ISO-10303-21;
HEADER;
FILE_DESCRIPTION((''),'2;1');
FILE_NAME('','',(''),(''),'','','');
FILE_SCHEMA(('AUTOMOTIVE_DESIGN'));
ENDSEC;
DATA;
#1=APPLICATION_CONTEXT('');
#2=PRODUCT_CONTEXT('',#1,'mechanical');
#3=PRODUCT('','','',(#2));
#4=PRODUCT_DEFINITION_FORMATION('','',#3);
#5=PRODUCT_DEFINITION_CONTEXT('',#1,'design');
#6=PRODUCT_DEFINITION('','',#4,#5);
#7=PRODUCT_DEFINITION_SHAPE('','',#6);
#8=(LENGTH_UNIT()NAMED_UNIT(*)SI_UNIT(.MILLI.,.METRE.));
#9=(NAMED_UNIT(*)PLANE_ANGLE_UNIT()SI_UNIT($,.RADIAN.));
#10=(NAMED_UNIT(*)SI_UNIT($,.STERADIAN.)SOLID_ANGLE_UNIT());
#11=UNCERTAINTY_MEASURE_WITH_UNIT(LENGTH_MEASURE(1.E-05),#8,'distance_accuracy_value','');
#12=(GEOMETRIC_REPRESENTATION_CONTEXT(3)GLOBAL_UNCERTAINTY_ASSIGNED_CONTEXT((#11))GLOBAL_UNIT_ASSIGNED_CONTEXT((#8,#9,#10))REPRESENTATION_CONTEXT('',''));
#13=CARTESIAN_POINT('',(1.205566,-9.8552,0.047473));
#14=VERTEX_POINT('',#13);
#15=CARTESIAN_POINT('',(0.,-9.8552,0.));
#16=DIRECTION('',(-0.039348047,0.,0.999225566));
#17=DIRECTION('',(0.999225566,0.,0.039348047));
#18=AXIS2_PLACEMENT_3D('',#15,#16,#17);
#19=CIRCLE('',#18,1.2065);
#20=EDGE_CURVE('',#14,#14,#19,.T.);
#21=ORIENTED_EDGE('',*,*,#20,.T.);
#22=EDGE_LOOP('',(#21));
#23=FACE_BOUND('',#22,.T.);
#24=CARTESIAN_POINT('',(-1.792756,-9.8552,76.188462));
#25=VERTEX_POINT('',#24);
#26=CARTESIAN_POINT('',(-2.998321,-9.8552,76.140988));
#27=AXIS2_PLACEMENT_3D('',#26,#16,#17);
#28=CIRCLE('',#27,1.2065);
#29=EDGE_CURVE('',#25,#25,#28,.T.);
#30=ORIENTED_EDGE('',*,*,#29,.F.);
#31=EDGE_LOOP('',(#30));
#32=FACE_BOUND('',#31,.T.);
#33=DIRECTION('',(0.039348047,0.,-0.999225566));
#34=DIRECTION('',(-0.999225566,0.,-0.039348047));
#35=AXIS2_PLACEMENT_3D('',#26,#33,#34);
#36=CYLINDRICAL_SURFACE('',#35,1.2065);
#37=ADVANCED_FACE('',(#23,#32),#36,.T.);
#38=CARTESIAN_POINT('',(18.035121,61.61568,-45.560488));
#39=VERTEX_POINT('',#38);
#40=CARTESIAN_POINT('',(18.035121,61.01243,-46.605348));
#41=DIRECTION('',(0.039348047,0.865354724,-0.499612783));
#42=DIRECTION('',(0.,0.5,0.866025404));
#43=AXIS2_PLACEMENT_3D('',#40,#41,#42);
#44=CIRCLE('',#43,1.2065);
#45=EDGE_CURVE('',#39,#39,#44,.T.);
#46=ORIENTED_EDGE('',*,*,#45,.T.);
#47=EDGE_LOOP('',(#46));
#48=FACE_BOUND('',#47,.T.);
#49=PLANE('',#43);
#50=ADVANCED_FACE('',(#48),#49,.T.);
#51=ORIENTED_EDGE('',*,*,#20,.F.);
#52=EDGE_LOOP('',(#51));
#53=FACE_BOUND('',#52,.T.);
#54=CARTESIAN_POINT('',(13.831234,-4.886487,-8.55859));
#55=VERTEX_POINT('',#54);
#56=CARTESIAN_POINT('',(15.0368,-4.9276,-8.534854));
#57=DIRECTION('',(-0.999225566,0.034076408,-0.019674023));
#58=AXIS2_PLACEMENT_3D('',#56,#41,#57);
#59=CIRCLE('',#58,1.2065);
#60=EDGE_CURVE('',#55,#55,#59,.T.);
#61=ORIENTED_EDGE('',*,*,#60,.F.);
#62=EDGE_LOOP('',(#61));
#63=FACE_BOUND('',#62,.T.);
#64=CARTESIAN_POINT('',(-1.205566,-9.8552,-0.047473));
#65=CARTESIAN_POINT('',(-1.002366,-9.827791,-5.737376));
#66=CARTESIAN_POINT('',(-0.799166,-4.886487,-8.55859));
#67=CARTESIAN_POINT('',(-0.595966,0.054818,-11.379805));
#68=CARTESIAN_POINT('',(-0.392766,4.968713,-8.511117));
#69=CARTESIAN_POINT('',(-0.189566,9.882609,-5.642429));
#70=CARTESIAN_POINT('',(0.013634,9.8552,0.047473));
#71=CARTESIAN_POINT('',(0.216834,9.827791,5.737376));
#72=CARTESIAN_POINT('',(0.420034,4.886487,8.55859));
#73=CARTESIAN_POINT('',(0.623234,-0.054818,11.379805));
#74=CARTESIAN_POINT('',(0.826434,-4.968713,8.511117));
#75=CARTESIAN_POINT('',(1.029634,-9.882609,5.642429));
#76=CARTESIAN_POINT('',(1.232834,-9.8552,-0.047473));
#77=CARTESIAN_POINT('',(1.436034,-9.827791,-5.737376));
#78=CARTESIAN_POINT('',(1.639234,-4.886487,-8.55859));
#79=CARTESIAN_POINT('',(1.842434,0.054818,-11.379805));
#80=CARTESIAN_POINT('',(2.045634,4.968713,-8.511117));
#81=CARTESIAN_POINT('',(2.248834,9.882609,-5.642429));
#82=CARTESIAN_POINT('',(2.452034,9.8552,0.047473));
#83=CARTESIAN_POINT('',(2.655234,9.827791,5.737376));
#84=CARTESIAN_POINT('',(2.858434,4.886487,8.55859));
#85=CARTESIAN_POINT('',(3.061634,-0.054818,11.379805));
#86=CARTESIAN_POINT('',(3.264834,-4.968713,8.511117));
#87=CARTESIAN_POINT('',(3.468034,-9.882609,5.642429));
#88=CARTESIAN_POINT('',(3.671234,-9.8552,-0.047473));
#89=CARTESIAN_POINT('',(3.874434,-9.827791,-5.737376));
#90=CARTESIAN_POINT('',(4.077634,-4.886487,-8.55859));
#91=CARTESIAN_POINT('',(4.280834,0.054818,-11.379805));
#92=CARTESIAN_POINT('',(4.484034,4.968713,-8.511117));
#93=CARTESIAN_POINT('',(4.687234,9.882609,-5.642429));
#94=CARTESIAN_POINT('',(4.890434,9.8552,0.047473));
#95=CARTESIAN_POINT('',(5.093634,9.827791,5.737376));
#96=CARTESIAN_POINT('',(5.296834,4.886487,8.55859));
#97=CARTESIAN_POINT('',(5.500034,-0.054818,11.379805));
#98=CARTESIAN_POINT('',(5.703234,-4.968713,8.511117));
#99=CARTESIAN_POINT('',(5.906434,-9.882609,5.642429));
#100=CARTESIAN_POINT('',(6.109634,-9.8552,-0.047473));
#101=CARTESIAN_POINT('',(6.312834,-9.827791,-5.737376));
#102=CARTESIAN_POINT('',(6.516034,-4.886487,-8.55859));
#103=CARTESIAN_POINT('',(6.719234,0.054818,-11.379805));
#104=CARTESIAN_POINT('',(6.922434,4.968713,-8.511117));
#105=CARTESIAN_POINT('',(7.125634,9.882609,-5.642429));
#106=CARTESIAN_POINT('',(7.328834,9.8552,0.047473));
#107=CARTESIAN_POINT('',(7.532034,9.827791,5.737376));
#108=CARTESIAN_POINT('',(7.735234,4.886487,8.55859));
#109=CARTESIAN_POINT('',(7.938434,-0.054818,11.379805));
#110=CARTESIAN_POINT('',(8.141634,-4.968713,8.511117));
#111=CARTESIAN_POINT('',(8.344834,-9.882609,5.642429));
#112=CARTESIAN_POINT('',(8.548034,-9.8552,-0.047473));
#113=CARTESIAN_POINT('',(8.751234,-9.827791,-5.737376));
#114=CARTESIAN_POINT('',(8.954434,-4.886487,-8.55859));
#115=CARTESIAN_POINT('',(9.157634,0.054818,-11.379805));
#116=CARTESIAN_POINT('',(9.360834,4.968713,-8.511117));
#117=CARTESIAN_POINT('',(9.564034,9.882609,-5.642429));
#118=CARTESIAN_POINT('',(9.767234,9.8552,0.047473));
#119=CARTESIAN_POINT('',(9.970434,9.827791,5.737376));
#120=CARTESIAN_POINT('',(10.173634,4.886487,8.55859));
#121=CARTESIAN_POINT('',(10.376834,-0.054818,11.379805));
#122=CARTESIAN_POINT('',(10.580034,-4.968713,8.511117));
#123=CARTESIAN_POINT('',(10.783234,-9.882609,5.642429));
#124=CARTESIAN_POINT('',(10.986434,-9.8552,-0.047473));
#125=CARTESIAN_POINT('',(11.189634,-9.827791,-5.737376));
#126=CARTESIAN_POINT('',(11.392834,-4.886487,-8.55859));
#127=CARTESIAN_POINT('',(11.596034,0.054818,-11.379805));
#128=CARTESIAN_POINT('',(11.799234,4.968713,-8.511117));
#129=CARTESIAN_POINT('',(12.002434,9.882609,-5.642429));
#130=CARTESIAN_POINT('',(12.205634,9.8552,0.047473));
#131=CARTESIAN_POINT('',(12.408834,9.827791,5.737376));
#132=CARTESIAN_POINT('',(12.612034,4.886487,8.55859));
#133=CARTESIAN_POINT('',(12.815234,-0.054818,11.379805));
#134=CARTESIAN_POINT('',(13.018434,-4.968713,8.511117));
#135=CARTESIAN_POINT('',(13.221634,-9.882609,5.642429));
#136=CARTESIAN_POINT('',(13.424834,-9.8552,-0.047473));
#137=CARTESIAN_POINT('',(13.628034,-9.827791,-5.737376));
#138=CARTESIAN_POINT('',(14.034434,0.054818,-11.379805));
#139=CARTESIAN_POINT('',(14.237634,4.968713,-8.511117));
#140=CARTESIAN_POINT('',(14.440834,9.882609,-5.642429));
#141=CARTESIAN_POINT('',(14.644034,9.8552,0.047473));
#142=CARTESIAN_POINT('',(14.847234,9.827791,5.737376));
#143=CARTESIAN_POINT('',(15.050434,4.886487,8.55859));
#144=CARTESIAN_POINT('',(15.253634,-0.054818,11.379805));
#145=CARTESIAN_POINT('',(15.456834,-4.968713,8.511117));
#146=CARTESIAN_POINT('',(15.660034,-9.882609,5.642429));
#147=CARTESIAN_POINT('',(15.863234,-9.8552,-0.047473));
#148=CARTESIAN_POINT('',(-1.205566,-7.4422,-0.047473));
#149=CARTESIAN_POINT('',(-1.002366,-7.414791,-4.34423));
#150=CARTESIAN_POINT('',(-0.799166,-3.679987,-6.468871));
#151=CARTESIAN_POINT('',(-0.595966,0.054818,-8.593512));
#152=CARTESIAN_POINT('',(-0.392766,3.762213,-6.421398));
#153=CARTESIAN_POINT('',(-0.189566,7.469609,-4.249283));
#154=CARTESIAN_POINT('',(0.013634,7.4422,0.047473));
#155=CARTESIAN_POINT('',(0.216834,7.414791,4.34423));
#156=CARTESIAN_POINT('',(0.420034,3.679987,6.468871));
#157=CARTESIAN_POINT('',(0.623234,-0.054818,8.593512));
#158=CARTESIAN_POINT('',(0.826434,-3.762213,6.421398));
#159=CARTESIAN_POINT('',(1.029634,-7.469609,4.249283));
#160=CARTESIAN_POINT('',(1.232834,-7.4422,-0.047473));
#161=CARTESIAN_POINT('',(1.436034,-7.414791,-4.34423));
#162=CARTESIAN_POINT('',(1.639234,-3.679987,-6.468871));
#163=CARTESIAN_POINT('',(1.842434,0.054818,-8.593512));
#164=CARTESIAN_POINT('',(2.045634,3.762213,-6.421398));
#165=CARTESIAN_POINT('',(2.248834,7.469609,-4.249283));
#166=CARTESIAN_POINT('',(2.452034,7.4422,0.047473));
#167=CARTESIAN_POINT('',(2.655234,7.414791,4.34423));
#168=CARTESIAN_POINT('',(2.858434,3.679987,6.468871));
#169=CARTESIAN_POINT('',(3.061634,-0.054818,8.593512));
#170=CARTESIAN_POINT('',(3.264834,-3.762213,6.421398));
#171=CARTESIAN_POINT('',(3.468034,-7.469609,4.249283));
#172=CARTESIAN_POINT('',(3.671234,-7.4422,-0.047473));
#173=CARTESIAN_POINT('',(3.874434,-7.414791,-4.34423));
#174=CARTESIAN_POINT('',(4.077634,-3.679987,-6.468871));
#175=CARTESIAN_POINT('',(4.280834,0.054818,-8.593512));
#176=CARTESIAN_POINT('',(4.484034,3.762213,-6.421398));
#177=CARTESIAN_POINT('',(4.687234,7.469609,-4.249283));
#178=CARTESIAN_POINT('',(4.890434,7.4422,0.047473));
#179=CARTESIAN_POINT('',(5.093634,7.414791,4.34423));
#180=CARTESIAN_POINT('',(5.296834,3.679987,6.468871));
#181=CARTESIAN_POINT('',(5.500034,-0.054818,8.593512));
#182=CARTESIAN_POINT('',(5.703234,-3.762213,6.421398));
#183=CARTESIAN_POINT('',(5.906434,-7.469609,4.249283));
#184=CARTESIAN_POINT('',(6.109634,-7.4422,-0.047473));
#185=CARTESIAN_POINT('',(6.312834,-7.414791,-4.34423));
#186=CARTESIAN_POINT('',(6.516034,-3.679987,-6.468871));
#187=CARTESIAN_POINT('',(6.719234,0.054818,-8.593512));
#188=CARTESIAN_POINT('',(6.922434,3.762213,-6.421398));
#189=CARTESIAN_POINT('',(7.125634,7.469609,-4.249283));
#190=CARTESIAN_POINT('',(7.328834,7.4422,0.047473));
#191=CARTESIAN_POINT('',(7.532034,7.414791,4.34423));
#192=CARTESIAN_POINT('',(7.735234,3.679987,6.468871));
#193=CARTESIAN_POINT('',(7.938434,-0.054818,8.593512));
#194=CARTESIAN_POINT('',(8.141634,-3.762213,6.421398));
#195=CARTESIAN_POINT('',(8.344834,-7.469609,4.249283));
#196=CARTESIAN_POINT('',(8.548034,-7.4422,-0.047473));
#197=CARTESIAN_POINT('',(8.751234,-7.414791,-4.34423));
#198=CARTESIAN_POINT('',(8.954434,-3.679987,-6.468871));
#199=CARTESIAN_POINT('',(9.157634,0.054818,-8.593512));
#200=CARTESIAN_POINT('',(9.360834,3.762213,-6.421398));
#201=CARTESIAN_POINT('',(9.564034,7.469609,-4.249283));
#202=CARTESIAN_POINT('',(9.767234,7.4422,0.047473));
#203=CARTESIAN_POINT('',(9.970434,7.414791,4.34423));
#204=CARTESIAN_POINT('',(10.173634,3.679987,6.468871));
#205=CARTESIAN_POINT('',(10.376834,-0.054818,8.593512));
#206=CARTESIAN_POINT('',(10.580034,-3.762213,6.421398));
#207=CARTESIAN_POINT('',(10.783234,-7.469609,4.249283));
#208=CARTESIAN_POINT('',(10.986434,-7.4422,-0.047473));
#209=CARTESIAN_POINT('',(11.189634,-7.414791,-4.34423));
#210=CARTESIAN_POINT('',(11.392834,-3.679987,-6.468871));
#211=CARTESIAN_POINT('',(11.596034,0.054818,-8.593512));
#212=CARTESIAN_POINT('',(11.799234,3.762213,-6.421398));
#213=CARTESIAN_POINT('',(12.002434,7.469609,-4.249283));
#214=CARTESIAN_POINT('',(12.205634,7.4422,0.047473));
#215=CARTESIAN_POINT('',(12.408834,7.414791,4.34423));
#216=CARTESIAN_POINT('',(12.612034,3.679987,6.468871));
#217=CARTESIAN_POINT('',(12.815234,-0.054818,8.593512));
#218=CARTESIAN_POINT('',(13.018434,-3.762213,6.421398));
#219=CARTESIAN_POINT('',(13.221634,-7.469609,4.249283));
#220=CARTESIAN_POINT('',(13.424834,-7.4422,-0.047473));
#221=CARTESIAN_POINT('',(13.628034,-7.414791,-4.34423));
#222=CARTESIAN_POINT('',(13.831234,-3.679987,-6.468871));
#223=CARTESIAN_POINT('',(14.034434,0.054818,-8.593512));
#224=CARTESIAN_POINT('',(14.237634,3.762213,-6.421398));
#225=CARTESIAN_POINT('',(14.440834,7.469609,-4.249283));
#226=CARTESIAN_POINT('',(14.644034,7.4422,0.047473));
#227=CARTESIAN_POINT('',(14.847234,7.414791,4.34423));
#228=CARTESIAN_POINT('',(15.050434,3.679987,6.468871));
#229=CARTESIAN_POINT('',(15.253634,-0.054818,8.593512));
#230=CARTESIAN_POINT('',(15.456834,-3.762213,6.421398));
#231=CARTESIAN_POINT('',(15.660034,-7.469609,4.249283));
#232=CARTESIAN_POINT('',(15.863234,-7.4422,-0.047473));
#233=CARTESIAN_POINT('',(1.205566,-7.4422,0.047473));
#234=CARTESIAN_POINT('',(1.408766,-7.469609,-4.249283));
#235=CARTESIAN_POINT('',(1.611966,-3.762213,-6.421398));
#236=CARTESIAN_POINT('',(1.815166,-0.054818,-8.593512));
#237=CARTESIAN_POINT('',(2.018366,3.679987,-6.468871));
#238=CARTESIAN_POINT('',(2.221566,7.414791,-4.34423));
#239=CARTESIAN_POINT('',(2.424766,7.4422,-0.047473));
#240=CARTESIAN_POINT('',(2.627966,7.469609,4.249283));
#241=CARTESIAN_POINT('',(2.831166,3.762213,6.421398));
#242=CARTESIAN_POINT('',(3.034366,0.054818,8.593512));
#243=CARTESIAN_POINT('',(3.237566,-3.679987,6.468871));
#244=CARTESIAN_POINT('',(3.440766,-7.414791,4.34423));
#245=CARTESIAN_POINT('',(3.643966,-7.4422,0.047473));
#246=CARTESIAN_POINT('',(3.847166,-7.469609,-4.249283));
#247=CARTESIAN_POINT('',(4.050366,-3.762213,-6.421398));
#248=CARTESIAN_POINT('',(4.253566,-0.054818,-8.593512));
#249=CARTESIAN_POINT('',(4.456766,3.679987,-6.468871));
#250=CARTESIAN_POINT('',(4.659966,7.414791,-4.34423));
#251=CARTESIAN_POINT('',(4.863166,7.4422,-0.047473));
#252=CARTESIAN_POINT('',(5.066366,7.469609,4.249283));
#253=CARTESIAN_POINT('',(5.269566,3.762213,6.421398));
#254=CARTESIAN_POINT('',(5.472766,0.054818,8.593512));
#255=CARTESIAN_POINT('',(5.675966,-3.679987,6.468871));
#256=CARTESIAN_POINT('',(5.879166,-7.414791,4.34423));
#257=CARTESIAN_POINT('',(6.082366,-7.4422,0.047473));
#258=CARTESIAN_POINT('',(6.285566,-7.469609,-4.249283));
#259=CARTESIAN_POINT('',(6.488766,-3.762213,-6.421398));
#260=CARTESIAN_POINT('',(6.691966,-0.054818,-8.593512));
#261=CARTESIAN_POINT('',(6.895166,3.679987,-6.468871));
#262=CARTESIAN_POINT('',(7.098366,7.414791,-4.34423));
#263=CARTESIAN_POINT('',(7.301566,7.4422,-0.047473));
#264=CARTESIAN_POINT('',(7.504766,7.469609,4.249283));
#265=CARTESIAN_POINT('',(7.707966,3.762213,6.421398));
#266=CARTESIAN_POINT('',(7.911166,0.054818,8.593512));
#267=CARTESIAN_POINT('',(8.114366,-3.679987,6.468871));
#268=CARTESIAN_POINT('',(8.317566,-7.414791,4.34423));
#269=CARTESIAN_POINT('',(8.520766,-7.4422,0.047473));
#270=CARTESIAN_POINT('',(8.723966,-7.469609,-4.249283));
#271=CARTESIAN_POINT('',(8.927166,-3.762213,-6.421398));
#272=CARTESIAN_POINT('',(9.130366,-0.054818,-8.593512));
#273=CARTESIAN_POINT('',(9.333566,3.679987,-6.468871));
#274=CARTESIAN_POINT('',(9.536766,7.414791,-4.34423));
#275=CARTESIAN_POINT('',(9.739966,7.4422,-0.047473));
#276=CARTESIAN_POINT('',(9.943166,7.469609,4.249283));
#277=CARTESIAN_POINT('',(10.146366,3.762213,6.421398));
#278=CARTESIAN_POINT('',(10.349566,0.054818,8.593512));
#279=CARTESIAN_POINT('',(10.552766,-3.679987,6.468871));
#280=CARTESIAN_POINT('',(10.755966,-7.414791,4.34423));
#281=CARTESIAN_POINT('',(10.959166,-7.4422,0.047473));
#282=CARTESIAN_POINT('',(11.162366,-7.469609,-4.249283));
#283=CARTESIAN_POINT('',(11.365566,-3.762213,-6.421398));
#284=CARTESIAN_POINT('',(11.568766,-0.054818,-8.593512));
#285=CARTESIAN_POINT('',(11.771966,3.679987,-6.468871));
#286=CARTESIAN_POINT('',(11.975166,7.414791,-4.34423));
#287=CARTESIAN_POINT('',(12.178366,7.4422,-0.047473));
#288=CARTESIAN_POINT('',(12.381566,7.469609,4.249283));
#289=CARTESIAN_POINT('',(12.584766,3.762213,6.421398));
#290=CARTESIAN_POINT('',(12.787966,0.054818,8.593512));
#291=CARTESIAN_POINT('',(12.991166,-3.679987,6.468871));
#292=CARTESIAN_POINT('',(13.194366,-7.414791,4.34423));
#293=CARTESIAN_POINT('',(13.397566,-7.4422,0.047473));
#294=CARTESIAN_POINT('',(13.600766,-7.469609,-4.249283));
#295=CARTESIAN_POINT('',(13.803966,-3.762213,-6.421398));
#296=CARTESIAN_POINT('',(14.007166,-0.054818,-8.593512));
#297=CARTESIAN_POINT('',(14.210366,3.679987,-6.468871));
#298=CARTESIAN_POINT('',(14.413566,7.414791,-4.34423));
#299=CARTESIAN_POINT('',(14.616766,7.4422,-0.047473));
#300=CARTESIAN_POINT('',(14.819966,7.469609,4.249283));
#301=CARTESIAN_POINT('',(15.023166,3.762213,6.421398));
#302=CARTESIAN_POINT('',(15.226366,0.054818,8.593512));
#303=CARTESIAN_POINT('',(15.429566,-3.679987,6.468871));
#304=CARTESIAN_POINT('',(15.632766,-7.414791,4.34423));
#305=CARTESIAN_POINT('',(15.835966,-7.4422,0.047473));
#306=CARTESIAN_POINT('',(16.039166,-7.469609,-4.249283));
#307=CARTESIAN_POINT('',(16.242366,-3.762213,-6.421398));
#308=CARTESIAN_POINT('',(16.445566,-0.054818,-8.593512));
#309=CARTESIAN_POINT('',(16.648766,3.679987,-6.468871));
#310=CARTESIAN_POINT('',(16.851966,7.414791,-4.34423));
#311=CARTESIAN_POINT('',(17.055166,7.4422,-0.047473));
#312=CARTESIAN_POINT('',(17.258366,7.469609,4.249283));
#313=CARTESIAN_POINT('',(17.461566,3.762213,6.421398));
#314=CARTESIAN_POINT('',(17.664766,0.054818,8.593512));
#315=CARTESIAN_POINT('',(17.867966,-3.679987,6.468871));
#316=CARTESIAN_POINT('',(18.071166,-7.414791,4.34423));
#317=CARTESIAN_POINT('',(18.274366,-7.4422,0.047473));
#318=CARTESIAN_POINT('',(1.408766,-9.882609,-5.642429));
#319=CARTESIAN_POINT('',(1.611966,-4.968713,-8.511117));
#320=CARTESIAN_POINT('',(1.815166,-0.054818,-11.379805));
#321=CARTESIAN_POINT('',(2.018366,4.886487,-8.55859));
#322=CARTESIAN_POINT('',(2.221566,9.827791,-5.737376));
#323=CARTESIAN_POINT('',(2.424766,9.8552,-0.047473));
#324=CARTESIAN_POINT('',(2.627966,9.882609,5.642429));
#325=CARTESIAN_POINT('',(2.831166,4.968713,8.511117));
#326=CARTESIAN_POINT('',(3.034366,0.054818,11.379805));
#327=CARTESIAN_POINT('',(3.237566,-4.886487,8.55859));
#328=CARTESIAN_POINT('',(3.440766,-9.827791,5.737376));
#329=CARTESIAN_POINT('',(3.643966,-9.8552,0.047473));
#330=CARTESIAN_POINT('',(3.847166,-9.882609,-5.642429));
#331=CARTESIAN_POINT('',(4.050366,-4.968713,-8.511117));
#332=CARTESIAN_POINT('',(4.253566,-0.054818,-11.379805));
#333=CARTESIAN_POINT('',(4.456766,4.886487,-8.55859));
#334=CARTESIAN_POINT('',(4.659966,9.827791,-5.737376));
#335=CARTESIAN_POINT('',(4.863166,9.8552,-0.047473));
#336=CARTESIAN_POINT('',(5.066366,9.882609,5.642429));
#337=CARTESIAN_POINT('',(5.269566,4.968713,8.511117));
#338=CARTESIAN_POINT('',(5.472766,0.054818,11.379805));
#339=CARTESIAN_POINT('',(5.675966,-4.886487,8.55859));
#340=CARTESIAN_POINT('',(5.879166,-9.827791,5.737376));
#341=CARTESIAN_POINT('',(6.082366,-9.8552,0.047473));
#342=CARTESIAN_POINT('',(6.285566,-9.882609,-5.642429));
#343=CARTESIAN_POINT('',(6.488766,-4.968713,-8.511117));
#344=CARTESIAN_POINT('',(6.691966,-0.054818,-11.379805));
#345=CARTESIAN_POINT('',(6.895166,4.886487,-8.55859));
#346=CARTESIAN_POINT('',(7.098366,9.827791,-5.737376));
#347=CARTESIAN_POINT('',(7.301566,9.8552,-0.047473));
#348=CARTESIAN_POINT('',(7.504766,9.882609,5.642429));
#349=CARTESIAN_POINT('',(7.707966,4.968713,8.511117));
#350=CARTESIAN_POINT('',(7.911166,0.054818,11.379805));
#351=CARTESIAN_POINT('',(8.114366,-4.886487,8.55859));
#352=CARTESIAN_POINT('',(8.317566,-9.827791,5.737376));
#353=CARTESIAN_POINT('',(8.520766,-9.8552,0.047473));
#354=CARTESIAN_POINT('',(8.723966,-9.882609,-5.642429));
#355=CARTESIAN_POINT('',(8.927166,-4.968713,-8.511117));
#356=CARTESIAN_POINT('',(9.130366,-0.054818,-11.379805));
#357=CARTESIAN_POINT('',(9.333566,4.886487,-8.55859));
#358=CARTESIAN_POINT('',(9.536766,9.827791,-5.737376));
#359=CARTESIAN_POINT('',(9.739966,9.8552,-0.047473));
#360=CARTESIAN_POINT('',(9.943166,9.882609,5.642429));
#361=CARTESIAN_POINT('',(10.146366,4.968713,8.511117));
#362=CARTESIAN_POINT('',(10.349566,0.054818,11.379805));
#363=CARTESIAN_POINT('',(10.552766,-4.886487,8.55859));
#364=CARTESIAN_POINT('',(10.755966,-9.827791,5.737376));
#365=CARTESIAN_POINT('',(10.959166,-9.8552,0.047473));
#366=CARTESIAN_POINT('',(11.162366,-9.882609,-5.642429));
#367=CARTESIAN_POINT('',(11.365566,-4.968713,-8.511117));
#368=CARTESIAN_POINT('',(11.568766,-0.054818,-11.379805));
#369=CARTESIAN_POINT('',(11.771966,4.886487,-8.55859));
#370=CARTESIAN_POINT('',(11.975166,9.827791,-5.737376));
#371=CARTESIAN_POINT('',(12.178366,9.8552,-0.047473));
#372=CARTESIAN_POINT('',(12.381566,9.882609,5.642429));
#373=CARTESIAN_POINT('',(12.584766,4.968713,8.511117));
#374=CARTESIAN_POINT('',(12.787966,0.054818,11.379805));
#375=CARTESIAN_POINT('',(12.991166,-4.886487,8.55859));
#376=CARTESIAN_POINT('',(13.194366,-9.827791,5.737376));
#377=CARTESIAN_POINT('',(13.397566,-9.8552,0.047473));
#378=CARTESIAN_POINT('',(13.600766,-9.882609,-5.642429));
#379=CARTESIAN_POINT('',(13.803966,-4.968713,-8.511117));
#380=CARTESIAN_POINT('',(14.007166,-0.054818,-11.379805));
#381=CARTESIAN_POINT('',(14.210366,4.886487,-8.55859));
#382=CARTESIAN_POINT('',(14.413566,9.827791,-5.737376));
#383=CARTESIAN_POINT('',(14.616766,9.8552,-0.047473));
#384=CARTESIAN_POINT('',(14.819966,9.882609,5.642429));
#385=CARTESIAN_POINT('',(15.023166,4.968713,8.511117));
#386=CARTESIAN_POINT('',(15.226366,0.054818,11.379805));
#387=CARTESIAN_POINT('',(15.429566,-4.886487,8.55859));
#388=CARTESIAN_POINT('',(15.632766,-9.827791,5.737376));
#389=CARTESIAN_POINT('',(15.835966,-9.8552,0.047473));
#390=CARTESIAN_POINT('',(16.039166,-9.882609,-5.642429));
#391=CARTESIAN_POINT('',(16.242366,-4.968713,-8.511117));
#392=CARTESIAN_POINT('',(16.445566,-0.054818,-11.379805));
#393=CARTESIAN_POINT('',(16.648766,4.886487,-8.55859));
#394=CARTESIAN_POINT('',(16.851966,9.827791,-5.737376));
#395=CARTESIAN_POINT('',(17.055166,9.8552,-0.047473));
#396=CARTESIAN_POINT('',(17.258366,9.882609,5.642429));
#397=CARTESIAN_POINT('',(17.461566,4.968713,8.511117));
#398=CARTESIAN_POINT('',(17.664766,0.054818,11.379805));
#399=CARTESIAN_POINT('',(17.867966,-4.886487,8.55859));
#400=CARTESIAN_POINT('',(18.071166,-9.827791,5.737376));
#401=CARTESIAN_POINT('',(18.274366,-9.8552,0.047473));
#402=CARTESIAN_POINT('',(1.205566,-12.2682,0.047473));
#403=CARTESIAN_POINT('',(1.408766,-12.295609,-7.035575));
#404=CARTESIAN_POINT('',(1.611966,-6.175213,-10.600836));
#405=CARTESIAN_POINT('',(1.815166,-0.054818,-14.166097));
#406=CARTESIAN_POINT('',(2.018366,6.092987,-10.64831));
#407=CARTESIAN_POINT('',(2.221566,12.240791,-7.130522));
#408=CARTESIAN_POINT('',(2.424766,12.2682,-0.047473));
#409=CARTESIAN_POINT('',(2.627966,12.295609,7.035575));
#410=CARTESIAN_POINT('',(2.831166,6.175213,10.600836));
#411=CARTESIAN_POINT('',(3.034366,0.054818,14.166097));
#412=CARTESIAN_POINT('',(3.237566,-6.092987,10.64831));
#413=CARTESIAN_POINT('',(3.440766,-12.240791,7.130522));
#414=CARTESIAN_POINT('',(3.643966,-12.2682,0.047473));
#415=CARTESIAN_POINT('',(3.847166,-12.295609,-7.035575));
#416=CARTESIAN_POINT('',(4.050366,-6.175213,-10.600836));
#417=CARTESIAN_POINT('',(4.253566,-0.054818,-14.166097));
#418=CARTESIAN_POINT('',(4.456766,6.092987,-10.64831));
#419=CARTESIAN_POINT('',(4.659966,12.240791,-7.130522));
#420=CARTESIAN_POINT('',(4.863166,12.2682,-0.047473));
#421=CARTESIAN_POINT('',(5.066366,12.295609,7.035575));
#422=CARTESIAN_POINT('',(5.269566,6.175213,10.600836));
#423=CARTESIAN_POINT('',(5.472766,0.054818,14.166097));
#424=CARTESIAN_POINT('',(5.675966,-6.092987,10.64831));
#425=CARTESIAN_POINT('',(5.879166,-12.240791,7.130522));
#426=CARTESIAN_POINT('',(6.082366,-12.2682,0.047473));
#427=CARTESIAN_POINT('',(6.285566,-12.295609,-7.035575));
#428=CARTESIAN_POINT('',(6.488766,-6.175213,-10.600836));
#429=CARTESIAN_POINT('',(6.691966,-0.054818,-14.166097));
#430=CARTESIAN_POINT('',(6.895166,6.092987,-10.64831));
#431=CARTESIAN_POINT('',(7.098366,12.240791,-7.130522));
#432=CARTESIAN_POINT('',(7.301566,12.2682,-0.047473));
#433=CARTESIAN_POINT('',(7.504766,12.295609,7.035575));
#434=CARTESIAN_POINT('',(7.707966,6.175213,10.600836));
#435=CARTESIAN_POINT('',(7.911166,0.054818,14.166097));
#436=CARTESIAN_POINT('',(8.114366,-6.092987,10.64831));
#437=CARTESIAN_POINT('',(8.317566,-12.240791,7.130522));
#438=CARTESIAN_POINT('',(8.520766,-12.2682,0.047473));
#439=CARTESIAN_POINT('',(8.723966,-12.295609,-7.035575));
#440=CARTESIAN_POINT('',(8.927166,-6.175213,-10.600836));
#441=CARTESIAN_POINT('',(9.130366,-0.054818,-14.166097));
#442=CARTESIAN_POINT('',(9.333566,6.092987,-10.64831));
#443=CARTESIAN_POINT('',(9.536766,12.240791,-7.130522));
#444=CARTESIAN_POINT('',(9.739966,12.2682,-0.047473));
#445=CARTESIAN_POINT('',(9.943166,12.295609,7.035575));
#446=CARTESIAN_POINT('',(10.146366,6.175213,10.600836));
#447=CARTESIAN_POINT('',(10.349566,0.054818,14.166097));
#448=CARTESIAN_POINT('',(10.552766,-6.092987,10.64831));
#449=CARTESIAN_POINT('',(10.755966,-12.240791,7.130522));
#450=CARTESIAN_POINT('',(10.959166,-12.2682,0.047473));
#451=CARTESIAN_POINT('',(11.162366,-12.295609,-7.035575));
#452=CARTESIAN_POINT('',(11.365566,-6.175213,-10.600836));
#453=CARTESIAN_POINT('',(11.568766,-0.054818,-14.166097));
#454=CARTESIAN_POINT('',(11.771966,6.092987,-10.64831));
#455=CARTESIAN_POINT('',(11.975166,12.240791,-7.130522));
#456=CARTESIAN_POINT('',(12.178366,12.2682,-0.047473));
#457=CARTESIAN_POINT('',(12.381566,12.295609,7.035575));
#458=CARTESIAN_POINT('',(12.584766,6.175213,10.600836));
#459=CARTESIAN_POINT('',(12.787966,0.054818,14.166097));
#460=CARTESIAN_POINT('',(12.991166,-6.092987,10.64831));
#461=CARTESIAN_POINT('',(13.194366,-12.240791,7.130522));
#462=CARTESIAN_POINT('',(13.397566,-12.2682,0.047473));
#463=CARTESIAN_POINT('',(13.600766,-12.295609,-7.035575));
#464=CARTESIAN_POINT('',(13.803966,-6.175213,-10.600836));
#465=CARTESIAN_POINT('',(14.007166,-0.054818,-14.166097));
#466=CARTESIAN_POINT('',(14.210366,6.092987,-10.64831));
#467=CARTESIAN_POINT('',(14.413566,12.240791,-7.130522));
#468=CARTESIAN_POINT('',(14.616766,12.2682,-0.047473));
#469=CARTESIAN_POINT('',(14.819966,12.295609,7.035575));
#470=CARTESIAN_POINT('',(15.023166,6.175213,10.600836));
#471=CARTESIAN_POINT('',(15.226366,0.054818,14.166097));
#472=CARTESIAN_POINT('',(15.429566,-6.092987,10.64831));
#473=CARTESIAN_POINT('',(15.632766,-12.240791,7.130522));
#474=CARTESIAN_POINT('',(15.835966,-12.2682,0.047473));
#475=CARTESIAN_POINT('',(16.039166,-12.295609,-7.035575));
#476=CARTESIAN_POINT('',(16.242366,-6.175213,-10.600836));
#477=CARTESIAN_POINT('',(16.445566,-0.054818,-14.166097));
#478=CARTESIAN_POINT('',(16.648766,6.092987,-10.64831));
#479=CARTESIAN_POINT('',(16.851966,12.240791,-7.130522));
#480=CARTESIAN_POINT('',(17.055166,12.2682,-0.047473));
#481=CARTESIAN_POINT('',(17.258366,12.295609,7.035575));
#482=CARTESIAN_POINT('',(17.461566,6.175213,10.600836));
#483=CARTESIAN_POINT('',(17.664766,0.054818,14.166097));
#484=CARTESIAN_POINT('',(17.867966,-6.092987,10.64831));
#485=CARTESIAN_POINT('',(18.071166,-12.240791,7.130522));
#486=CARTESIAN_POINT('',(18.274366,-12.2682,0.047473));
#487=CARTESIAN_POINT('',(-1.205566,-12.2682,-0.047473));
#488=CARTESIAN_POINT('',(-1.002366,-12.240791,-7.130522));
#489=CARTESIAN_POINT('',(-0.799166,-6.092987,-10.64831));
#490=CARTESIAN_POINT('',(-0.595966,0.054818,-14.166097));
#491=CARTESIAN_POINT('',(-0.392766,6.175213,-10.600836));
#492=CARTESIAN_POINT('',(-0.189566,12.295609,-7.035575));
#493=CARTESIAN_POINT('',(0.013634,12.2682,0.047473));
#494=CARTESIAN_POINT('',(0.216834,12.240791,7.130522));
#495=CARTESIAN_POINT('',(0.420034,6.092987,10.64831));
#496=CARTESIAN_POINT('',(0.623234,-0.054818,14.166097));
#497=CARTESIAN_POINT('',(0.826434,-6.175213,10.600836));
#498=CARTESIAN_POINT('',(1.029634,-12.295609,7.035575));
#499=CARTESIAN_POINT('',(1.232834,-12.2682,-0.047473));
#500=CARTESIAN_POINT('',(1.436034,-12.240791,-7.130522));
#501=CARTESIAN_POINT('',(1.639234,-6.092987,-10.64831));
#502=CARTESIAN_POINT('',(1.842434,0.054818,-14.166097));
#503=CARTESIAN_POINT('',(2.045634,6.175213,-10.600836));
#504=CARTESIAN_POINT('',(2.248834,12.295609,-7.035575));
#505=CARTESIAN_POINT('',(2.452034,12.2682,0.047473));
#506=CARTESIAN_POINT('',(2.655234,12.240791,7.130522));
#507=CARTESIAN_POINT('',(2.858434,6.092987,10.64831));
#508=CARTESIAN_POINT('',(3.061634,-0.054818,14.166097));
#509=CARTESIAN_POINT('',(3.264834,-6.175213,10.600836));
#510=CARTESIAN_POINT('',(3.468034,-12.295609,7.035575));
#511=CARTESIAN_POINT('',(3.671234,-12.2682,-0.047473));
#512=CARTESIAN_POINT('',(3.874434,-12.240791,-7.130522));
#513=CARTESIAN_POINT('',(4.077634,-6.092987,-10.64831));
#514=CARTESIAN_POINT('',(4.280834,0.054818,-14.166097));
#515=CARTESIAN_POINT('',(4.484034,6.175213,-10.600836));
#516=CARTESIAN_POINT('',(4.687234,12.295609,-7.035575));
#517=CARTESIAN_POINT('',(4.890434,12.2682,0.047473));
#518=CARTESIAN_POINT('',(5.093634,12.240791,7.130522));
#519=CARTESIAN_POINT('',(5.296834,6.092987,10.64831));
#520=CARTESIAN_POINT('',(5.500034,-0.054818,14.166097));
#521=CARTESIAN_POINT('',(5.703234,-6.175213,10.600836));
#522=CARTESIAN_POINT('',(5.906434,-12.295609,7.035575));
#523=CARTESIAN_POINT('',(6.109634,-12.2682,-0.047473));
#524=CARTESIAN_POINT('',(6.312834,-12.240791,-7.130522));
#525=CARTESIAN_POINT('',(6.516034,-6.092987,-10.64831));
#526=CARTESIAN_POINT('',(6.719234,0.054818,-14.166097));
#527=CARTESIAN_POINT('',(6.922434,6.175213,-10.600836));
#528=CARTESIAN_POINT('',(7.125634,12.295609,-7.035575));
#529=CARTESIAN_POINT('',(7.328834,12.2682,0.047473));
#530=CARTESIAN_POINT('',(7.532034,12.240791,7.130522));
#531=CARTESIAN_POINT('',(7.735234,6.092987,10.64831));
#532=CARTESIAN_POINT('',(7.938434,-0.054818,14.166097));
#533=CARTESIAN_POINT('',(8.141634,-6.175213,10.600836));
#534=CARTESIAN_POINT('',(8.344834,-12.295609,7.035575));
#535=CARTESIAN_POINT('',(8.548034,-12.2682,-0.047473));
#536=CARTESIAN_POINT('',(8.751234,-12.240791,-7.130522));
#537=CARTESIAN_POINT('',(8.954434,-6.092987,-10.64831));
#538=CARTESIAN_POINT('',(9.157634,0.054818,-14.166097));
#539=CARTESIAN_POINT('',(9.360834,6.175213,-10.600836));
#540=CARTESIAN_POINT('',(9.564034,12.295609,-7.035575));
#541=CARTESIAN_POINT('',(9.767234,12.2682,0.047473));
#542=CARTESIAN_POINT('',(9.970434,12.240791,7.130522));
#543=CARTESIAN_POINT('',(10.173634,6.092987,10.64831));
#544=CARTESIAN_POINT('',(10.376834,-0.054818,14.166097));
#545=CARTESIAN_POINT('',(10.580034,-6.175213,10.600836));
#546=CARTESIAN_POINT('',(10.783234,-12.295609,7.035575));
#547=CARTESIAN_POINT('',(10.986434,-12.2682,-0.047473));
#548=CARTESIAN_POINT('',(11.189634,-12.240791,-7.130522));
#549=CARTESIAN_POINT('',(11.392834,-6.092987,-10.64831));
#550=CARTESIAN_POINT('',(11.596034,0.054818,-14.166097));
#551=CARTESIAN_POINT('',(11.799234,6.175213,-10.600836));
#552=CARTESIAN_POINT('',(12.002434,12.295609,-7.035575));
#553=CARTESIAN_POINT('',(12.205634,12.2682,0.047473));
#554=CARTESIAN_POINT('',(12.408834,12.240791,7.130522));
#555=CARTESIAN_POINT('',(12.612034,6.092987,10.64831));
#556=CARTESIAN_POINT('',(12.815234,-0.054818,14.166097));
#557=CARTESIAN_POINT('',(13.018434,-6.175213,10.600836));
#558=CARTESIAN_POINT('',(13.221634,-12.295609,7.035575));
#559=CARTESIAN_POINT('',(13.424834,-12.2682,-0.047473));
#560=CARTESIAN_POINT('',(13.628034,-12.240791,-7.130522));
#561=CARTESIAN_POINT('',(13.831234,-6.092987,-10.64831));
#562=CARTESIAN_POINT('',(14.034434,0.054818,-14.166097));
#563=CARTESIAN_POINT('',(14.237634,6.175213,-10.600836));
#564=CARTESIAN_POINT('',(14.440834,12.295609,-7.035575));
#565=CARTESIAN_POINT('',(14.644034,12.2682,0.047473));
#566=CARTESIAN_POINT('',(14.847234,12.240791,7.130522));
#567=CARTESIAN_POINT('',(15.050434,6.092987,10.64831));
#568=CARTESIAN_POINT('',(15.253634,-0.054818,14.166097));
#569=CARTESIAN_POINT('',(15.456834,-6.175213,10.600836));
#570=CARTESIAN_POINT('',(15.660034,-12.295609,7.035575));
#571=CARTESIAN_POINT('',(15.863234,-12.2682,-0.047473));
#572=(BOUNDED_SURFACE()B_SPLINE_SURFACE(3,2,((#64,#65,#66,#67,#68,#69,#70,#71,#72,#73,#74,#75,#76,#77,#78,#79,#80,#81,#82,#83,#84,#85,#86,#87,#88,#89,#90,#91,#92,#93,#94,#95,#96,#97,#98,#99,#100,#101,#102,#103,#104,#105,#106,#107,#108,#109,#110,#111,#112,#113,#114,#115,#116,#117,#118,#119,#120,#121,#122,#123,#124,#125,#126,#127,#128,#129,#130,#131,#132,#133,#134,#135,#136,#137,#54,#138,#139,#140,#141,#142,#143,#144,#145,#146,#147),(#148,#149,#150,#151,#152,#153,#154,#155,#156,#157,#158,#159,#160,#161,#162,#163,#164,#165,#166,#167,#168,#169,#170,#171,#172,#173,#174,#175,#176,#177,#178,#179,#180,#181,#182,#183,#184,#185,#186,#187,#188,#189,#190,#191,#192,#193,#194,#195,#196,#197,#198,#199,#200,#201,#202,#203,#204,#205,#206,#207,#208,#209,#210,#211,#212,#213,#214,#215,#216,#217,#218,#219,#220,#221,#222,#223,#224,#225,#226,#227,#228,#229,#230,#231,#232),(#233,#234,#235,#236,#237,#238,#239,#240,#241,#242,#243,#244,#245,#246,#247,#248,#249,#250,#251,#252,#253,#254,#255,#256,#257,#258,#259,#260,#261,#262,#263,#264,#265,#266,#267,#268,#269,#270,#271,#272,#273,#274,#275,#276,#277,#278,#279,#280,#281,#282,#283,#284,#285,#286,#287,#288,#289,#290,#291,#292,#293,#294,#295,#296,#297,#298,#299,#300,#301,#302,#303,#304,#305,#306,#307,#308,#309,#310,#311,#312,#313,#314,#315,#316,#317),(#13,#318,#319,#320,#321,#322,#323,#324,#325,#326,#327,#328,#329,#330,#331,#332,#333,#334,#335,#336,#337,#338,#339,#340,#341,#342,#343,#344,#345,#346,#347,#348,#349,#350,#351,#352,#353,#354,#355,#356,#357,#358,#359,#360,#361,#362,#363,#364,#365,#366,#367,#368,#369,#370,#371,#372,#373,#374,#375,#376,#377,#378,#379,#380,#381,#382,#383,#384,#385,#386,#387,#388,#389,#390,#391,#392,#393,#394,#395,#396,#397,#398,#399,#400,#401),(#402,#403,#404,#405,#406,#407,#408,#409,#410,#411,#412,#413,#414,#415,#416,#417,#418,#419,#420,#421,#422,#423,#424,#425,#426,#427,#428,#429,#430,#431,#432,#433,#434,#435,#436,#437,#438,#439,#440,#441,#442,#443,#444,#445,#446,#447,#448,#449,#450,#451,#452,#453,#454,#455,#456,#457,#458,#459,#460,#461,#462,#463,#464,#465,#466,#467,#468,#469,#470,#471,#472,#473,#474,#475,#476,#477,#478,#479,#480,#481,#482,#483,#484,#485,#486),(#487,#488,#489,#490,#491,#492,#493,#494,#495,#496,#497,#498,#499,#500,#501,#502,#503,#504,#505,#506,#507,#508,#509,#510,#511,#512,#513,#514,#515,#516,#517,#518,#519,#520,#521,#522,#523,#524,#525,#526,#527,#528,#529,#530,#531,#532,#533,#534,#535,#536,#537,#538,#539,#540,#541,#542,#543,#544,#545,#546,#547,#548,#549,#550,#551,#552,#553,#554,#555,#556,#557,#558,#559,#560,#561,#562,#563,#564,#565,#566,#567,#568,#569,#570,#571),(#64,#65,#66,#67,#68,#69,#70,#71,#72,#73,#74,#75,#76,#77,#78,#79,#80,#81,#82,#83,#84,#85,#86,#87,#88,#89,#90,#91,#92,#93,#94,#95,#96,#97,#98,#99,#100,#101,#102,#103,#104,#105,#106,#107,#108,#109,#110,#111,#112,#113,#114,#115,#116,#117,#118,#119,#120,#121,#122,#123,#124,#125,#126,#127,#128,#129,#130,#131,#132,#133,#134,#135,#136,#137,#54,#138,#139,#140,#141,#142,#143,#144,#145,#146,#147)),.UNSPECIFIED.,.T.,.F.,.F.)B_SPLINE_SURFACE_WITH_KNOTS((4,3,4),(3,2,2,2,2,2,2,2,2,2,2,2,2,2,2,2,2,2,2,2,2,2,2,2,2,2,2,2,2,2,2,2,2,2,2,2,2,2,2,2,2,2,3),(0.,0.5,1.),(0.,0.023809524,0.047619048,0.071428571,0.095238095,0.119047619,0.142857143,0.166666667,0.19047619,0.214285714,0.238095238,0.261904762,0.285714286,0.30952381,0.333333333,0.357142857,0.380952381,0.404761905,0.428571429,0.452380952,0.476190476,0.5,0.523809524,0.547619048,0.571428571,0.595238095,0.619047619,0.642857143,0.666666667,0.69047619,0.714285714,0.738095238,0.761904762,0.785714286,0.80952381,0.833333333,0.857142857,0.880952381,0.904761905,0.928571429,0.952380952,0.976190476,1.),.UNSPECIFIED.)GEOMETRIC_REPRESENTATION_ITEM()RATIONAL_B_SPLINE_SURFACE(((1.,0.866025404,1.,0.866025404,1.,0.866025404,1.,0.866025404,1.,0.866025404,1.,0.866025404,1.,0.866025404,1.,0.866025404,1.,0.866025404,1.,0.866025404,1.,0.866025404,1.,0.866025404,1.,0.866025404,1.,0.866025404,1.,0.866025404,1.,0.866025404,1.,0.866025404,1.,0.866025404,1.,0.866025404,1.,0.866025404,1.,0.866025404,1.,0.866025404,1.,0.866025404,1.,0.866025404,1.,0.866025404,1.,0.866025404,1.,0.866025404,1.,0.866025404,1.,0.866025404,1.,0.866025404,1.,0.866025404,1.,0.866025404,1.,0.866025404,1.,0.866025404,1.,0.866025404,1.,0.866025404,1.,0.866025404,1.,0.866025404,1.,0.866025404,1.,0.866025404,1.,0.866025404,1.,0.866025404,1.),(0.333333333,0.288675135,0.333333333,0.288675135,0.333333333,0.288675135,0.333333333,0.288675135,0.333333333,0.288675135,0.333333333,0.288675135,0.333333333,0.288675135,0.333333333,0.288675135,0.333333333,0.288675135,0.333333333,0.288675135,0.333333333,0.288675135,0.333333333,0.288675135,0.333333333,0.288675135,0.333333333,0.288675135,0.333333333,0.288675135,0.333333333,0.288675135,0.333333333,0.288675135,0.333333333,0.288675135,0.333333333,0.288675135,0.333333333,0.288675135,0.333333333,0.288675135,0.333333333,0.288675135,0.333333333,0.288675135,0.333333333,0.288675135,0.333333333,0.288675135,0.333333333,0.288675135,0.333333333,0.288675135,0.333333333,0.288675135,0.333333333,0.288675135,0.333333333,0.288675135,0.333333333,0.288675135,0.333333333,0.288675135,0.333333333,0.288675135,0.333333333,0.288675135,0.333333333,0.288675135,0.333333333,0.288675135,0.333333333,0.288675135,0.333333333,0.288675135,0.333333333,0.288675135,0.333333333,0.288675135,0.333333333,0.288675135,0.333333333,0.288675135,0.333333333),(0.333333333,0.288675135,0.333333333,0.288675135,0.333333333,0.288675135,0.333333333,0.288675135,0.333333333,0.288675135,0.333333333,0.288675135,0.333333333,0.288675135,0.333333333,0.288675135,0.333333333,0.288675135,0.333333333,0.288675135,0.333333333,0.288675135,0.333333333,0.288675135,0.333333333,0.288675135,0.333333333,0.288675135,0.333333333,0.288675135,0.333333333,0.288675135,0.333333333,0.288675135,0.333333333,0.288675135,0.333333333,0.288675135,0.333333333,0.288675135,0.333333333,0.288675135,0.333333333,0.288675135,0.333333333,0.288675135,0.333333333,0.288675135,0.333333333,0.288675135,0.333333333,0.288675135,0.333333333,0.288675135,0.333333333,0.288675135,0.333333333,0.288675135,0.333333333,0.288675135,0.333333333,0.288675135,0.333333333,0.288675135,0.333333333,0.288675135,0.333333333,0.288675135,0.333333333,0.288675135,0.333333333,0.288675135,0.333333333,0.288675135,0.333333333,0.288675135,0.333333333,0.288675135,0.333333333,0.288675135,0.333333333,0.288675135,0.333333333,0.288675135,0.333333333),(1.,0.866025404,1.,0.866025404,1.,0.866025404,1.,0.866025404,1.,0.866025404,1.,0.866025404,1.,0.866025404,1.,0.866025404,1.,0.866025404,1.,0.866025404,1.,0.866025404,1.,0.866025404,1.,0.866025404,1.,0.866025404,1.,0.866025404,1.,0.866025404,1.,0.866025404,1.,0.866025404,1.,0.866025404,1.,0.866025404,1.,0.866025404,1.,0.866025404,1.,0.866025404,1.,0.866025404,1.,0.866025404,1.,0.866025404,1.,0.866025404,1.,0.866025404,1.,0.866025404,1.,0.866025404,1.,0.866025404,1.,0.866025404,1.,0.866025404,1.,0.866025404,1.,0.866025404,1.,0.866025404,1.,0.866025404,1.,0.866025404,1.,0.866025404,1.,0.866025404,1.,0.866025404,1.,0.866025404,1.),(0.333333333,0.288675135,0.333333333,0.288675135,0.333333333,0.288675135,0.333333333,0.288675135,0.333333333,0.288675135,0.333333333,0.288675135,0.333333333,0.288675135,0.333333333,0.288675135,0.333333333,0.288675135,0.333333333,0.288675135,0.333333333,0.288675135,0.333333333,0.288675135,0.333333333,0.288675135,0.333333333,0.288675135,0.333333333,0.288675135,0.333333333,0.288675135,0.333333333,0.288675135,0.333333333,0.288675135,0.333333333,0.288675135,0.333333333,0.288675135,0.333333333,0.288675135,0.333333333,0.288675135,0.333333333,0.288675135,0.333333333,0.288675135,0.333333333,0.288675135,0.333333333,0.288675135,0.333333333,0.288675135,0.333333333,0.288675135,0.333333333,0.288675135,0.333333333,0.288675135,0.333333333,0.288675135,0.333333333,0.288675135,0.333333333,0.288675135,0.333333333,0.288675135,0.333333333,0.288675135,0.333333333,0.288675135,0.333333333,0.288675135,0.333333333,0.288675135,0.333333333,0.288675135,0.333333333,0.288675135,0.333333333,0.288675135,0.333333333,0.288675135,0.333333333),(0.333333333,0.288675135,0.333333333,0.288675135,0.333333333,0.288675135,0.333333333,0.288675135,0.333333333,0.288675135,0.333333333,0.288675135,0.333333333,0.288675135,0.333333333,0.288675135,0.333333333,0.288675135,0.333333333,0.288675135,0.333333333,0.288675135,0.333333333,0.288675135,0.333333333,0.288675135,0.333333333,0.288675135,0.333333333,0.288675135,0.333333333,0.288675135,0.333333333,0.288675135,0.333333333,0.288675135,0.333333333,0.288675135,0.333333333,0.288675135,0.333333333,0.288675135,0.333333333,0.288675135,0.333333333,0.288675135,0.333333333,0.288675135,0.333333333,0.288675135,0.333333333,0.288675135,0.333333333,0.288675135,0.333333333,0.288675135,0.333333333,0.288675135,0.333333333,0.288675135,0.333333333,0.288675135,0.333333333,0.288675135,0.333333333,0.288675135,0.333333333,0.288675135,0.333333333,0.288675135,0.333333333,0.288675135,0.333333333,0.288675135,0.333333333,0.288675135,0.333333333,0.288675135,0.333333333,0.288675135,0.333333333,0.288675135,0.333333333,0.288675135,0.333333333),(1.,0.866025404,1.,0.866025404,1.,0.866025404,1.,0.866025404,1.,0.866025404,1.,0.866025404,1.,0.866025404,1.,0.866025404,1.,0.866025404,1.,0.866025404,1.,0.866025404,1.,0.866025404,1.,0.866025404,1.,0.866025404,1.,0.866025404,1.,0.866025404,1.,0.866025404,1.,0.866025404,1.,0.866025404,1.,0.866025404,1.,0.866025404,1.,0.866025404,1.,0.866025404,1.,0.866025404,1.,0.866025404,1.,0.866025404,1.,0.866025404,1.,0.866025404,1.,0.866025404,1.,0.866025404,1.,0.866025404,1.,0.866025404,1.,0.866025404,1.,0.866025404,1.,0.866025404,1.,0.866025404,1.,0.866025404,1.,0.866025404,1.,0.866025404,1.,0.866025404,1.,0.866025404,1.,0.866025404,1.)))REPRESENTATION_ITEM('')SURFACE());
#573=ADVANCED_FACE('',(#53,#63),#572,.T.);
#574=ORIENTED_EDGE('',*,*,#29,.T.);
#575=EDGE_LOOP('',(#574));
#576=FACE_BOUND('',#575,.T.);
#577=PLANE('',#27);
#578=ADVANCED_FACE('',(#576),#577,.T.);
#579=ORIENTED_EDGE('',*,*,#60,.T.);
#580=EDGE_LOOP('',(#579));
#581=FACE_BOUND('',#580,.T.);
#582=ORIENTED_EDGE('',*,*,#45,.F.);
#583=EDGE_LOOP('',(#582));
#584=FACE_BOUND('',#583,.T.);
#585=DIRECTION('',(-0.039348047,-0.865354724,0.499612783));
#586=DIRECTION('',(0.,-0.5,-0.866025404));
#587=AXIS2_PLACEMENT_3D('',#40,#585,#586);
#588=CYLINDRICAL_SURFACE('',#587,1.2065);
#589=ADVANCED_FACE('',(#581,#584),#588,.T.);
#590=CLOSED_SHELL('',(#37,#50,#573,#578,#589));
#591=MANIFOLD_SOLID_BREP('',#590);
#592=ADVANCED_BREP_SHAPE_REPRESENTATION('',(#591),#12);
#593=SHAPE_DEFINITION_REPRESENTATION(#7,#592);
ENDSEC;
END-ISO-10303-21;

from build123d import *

# Parameters (mm, degrees)
SWEEP1_PITCH   = 2.4384
SKETCH4_R      = 1.2065
EXTRUDE1_DEPTH = 76.2
SKETCH5_R      = 1.2065
EXTRUDE2_DEPTH = 76.2


with BuildPart() as part:
    # Sweep1: the profile of Sketch3 screwed along a right-hand helix of 6.166667 turns, 6 arcs to a turn; built about Z, then put on its axis
    sweep1_z = Axis((0, 0, 0), (0, 0, 1))
    sweep1_corners = [(9.88323439, -0.047460601, 1.205240148), (11.061374251, 0.001103098, -0.028012679), (9.82716561, 0.047460601, -1.205240148), (8.649025749, -0.001103098, 0.028012679)]
    with BuildLine(mode=Mode.PRIVATE) as sweep1_profile:
        ThreePointArc((9.88323439, -0.047460601, 1.205240148), (10.727917299, -0.032779704, 0.832425526), (11.061374251, 0.001103098, -0.028012679))
        ThreePointArc((11.061374251, 0.001103098, -0.028012679), (10.688270685, 0.034339721, -0.872041437), (9.82716561, 0.047460601, -1.205240148))
        ThreePointArc((9.82716561, 0.047460601, -1.205240148), (8.982482701, 0.032779704, -0.832425526), (8.649025749, -0.001103098, 0.028012679))
        ThreePointArc((8.649025749, -0.001103098, 0.028012679), (9.022129315, -0.034339721, 0.872041437), (9.88323439, -0.047460601, 1.205240148))
    sweep1_cap = Face(sweep1_profile.wire())
    sweep1_arcs = [((9.88323439, -0.047460601, 1.205240148), (11.08940864, -0.046357502, 1.177227469), (11.061374251, 0.001103098, -0.028012679), (1, 0.7071067811865476, 1)), ((11.061374251, 0.001103098, -0.028012679), (11.033339861, 0.048563699, -1.233252827), (9.82716561, 0.047460601, -1.205240148), (1, 0.7071067811865476, 1)), ((9.82716561, 0.047460601, -1.205240148), (8.62099136, 0.046357502, -1.177227469), (8.649025749, -0.001103098, 0.028012679), (1, 0.7071067811865476, 1)), ((8.649025749, -0.001103098, 0.028012679), (8.677060139, -0.048563699, 1.233252827), (9.88323439, -0.047460601, 1.205240148), (1, 0.7071067811865476, 1))]  # start, shoulder, end, weights
    sweep1_turn_angles = [0, 30, 60, 90, 120, 150, 180, 210, 240, 270, 300, 330, 360]
    sweep1_turn_weights = [1, 0.8660254037844387, 1, 0.8660254037844387, 1, 0.8660254037844387, 1, 0.8660254037844387, 1, 0.8660254037844387, 1, 0.8660254037844387, 1]
    sweep1_turn_sides = [Face.make_bezier_surface([[Vector(p[j][0], p[j][1], 0).rotate(sweep1_z, sweep1_turn_angles[2 * i + k]) / sweep1_turn_weights[2 * i + k] + Vector(0, 0, p[j][2] + SWEEP1_PITCH * sweep1_turn_angles[2 * i + k] / 360) for k in range(3)] for j in range(3)], [[p[3][j] * sweep1_turn_weights[2 * i + k] for k in range(3)] for j in range(3)]) for p in sweep1_arcs for i in range(6)]
    sweep1_last_angles = [2160, 2190, 2220]
    sweep1_last_weights = [1, 0.866025403784403, 1]
    sweep1_last_sides = [Face.make_bezier_surface([[Vector(p[j][0], p[j][1], 0).rotate(sweep1_z, sweep1_last_angles[2 * i + k]) / sweep1_last_weights[2 * i + k] + Vector(0, 0, p[j][2] + SWEEP1_PITCH * sweep1_last_angles[2 * i + k] / 360) for k in range(3)] for j in range(3)], [[p[3][j] * sweep1_last_weights[2 * i + k] for k in range(3)] for j in range(3)]) for p in sweep1_arcs for i in range(1)]
    sweep1 = Plane(origin=(0, 0, 0), x_dir=(0, -1, 0), z_dir=(1, 0, 0)) * Solid(Shell([*[p.moved(Location((0, 0, SWEEP1_PITCH * i))) for i in range(6) for p in sweep1_turn_sides], *sweep1_last_sides, sweep1_cap, sweep1_cap.rotate(sweep1_z, 2220).moved(Location((0, 0, SWEEP1_PITCH * 2220 / 360)))]))
    add(sweep1)

    # Sketch4 → Extrude1 (add)
    with BuildSketch(Plane(origin=(0, 0, 0), x_dir=(-0.9989557795402644, 0.02323612909274865, -0.03933742274079572), z_dir=(-0.03934804652827867, -1.074661193367632e-14, 0.9992255657429951))):
        with Locations(Location((-0.228996699, 9.852539142, 0), (0, 0, 181.33145196))):
            Circle(SKETCH4_R)
    extrude(amount=EXTRUDE1_DEPTH)

    # Sketch5 → Extrude2 (add)
    with BuildSketch(Plane(origin=(0.023281008, 0.51200331, -0.295605249), x_dir=(0.9981783086806318, -0.05692649144876503, -0.019985961343079544), z_dir=(0.03934804652827868, 0.8653547240443688, -0.49961278287139826))):
        with Locations(Location((15.460495825, 9.15714575, 0), (0, 0, 177.376564152))):
            Circle(SKETCH5_R)
    extrude(amount=EXTRUDE2_DEPTH)


solid = part.part
